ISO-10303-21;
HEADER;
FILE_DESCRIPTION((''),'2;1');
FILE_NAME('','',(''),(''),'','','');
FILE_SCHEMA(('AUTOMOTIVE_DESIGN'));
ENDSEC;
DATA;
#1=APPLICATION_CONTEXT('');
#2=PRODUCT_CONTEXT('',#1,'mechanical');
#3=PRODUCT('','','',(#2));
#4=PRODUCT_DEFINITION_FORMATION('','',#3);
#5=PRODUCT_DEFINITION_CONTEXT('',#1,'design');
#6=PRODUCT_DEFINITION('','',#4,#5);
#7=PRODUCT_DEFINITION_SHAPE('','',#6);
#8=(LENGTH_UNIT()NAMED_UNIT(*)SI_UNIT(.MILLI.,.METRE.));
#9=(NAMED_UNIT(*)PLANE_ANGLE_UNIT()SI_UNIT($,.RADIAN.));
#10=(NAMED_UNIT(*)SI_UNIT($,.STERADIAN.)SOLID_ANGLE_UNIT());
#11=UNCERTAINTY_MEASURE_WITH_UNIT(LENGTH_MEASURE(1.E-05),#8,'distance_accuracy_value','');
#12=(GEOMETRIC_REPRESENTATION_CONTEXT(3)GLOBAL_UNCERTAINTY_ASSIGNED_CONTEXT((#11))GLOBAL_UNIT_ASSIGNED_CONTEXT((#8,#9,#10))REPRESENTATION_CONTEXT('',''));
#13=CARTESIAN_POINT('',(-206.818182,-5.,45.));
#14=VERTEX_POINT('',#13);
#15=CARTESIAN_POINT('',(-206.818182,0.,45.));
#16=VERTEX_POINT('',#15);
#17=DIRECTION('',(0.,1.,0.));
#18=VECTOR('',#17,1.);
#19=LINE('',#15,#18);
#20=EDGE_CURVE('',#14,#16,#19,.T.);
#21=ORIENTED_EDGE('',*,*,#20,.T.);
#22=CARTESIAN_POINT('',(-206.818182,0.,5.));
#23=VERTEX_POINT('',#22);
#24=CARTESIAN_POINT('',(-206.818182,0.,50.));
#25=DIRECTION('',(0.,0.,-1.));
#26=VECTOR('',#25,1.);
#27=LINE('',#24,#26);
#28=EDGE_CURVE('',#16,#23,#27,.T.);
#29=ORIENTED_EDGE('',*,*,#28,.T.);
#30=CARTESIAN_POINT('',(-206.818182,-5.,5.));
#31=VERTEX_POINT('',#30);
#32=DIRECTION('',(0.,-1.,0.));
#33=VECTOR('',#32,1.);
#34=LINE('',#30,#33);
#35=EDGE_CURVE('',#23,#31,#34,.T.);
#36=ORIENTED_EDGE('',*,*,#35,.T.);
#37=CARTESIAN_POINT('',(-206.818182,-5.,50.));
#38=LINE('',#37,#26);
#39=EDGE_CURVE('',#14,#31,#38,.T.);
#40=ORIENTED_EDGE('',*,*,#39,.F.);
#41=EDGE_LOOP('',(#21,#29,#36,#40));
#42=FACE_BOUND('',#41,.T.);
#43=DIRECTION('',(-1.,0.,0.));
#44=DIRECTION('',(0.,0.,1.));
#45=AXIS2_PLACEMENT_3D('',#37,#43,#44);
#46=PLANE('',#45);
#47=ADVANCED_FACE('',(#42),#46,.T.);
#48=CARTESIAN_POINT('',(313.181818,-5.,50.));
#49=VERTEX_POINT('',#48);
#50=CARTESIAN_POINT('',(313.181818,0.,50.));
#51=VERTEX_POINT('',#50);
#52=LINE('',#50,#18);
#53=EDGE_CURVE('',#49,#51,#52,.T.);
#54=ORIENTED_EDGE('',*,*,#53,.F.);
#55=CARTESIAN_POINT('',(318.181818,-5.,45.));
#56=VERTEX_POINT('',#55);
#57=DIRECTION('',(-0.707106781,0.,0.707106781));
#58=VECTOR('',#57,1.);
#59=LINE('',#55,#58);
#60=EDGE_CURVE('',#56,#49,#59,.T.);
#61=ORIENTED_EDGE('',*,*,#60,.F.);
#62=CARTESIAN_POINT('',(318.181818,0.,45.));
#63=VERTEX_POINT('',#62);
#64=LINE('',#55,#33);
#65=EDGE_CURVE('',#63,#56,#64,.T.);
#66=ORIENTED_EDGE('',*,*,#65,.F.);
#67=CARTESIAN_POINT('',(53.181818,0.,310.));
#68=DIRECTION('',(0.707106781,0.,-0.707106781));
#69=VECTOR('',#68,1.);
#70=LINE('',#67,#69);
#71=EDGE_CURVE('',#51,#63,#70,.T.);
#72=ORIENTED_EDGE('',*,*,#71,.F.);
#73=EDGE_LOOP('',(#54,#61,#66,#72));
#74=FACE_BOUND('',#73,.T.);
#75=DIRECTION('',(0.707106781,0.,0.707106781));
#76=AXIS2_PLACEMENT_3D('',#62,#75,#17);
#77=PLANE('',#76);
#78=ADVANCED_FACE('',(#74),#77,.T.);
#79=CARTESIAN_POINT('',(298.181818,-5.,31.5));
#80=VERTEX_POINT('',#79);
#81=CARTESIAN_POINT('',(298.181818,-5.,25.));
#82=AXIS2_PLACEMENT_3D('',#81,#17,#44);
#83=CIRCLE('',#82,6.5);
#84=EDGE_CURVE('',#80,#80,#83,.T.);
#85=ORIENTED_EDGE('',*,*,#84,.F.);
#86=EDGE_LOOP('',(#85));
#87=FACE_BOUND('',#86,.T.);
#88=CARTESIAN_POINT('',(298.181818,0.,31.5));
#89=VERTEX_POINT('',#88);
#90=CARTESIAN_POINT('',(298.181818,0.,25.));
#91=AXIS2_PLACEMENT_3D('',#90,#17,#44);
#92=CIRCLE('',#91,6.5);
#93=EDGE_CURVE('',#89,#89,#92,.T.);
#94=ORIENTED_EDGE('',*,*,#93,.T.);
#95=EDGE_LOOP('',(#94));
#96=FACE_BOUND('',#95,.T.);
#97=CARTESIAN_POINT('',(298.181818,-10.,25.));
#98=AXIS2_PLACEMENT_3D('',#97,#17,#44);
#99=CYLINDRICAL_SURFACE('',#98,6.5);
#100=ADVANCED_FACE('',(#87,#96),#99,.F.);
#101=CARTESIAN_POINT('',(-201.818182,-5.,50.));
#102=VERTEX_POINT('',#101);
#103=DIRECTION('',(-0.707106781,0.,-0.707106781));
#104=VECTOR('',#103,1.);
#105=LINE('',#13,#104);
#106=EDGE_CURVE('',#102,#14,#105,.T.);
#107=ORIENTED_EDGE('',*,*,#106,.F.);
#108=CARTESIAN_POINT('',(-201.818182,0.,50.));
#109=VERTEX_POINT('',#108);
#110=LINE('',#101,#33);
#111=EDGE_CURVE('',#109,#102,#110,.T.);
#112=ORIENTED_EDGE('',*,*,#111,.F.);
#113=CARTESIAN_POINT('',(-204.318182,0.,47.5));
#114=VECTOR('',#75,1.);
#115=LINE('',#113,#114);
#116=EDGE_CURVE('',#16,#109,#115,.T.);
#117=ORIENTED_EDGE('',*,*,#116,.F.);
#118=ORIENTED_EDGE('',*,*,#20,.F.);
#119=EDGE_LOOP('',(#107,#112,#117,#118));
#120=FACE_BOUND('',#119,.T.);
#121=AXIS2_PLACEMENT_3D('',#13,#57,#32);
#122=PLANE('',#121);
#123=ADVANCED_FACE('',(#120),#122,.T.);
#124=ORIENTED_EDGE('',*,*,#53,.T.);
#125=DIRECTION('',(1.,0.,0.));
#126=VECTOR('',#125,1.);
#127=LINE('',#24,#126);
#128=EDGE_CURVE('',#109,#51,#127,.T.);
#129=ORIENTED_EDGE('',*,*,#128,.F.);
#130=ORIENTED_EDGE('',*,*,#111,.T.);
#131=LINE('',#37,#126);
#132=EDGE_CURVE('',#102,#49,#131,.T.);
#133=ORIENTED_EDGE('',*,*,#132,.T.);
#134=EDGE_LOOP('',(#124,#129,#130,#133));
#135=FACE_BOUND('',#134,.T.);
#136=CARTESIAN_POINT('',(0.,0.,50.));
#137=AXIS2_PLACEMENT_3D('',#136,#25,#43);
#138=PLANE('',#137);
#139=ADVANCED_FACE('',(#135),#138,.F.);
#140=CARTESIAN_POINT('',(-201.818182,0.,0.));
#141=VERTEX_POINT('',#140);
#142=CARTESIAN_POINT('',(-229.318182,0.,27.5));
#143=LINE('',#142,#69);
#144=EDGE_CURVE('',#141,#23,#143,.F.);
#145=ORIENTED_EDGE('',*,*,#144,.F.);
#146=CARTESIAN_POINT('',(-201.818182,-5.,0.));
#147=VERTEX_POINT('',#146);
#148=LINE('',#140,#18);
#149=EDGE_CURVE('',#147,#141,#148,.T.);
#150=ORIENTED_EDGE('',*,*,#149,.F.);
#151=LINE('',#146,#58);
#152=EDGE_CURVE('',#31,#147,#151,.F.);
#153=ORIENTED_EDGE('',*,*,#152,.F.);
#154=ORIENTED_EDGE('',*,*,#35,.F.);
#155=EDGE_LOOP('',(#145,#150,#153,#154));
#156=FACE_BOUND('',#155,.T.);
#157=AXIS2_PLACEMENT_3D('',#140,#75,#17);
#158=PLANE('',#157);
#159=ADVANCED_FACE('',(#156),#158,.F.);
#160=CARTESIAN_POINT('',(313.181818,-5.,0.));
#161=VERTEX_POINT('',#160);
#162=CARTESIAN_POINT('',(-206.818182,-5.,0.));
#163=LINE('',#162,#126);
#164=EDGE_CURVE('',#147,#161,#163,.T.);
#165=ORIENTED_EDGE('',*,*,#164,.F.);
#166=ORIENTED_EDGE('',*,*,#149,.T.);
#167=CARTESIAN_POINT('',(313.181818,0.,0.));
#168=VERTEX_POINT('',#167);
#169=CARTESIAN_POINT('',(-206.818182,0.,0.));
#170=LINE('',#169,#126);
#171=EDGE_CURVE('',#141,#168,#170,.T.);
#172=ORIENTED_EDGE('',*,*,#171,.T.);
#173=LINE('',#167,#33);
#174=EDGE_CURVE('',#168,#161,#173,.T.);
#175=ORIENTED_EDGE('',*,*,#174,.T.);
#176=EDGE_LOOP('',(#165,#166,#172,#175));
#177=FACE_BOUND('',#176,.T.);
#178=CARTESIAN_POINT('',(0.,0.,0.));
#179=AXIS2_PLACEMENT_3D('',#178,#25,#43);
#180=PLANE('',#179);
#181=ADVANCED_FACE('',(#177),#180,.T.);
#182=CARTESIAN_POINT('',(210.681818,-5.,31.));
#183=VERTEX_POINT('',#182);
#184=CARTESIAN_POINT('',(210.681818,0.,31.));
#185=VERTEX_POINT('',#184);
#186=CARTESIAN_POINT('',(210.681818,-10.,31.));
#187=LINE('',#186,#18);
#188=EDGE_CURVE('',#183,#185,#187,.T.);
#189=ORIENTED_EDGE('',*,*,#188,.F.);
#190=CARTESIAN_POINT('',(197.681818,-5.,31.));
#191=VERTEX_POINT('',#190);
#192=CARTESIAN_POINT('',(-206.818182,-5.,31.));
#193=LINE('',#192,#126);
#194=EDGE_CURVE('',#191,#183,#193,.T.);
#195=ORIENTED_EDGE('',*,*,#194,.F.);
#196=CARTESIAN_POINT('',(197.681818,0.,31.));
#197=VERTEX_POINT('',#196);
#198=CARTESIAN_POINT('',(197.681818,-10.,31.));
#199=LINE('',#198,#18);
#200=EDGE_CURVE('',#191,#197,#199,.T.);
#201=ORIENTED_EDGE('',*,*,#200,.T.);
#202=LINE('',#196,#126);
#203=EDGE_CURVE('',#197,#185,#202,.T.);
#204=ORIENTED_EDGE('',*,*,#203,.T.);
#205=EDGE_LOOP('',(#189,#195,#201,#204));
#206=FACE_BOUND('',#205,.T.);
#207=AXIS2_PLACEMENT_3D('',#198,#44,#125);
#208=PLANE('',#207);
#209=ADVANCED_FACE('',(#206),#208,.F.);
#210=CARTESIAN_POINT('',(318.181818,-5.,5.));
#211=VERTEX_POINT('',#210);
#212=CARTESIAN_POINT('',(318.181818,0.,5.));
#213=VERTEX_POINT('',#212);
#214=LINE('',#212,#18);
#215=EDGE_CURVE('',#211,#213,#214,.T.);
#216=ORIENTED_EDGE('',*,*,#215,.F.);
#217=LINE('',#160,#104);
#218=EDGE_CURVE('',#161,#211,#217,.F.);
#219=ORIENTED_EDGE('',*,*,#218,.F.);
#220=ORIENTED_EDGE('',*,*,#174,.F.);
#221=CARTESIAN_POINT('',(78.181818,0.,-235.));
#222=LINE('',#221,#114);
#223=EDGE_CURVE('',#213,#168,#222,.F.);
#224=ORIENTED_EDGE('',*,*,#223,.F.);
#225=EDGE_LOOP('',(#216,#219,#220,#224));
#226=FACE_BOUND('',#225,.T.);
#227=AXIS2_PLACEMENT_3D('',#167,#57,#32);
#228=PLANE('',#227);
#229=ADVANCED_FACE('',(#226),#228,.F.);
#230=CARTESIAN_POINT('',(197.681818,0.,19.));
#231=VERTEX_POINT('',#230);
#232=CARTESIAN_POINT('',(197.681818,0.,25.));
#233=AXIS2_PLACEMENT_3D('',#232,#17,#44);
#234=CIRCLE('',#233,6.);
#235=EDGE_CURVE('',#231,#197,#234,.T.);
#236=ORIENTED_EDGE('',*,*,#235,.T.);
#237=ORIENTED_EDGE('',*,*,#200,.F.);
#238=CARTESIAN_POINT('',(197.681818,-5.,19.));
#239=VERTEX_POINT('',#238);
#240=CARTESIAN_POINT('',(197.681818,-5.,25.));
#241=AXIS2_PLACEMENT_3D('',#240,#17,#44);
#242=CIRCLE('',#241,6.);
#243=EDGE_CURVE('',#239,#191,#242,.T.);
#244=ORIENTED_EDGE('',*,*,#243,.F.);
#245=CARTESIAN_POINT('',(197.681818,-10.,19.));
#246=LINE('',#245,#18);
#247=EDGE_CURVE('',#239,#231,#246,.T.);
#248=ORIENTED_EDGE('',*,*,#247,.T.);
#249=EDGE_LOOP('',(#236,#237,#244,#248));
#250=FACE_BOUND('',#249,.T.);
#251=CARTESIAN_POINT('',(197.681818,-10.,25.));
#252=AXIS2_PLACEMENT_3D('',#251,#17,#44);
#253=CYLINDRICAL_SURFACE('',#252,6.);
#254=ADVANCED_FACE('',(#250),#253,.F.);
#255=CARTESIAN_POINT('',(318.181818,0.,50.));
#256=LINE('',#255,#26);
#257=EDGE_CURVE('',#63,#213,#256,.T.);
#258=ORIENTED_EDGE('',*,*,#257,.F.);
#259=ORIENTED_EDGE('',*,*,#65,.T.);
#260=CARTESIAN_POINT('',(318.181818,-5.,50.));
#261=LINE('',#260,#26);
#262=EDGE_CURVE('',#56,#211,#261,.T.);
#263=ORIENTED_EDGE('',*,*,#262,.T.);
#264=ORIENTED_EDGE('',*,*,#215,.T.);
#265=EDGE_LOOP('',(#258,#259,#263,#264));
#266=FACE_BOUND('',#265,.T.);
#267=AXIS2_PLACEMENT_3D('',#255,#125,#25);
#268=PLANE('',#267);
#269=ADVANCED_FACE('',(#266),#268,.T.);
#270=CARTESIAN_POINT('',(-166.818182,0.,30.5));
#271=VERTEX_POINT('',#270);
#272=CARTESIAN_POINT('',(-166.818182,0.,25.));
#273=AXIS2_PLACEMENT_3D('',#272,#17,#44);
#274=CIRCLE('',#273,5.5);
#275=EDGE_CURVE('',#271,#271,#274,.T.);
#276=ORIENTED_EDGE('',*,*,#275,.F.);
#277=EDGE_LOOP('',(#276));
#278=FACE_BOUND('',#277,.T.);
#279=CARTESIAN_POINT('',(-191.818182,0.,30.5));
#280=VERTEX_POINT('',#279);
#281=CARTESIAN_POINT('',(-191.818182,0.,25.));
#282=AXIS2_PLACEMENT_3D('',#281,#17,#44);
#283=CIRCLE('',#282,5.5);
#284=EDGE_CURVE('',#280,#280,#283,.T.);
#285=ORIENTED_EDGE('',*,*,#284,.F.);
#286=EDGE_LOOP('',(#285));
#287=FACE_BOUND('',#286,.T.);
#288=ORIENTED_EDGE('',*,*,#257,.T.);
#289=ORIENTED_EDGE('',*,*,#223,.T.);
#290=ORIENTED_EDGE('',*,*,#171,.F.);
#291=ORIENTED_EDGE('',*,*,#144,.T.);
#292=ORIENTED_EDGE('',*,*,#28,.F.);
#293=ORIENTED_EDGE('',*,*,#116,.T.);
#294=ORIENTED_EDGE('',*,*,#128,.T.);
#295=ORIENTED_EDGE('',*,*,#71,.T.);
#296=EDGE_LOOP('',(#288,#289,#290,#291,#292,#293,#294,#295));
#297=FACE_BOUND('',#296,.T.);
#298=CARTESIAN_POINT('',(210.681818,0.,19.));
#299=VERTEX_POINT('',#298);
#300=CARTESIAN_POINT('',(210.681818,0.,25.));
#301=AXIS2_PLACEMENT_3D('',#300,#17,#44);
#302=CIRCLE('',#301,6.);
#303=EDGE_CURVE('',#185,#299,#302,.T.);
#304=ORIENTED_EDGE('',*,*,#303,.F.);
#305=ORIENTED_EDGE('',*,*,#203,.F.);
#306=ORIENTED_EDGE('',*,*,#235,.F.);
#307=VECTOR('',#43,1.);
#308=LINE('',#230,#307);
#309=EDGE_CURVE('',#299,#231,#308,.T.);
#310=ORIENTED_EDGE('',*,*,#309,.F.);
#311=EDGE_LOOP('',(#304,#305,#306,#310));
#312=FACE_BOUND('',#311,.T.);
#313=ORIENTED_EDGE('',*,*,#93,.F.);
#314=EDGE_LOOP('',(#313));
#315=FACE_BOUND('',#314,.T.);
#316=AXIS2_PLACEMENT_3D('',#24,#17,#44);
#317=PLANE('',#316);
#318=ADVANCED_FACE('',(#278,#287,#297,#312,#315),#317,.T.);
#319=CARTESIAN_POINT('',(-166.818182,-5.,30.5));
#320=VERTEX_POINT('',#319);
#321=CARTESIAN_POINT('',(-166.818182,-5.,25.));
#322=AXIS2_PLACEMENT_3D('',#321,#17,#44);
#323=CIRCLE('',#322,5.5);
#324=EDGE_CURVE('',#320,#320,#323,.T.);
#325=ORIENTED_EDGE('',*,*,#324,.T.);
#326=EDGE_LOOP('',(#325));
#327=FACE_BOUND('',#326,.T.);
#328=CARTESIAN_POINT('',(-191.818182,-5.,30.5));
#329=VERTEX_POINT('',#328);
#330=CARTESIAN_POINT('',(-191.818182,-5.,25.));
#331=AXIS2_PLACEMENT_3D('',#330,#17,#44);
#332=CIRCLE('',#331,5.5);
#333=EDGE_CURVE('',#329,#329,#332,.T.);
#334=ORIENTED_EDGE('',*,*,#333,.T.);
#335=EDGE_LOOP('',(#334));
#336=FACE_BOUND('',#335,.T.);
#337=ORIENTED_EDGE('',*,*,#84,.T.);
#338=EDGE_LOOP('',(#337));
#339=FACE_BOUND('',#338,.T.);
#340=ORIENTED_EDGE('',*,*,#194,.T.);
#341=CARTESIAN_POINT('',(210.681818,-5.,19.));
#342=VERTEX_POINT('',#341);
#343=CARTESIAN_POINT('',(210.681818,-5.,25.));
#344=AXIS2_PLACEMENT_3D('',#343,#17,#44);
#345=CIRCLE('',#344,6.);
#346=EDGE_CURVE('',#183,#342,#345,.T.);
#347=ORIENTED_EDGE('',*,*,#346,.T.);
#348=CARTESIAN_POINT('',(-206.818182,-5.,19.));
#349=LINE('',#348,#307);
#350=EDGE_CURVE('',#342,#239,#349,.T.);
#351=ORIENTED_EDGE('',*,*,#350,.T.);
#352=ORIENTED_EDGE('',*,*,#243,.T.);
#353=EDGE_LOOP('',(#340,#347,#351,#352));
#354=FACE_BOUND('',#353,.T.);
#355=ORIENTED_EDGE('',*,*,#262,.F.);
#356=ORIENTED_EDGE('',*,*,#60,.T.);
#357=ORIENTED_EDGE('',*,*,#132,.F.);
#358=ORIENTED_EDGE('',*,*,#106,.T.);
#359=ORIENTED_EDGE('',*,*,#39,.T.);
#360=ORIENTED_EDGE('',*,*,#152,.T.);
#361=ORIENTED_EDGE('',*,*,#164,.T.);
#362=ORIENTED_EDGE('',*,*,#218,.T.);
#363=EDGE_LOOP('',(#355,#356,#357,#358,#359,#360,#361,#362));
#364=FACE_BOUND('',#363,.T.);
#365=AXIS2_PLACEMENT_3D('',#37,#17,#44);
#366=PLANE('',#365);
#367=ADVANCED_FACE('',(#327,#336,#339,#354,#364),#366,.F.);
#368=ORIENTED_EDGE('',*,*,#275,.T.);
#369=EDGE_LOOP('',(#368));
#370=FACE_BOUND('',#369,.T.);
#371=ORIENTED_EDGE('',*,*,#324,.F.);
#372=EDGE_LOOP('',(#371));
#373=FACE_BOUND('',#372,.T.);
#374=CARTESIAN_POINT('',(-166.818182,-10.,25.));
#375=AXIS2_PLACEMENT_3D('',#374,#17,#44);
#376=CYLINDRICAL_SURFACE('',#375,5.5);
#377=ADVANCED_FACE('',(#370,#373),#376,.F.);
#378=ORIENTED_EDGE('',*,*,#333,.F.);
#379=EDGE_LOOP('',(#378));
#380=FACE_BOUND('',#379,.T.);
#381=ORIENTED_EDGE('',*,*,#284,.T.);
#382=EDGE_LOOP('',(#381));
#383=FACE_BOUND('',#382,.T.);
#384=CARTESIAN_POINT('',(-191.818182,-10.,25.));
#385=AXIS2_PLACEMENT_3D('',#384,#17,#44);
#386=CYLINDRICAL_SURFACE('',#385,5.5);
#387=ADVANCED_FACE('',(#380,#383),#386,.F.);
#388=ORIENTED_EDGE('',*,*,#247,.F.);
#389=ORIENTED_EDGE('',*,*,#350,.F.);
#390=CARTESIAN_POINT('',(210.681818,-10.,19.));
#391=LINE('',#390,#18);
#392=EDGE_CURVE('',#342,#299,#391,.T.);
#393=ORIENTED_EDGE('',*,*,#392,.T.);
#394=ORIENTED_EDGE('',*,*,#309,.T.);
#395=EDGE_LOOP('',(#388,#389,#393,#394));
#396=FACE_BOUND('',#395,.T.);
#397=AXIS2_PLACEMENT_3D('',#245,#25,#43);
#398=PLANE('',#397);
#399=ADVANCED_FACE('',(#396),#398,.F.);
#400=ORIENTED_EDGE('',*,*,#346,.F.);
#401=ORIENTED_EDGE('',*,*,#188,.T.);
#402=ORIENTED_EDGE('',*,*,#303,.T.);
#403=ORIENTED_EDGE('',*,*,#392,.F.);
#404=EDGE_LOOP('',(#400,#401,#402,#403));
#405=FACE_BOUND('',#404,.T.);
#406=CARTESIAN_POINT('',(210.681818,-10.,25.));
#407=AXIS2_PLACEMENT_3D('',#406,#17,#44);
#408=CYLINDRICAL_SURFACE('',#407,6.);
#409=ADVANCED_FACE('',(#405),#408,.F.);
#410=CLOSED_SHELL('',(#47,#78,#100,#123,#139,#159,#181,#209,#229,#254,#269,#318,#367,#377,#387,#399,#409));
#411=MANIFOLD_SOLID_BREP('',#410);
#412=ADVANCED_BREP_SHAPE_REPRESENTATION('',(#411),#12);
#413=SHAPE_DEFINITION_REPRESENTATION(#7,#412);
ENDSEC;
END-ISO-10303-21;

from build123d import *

# Parameters (mm, degrees)
SKETCH_1_W             = 525
SKETCH_1_H             = 5
SM_BASE_FLANGE_1_DEPTH = 50
SKETCH_6_R             = 5.5
CUT_EXTRUDE_1_DEPTH    = 10
CUT_EXTRUDE_2_DEPTH    = 10
SKETCH_8_R             = 6.5
CUT_EXTRUDE_3_DEPTH    = 10
OTHER_START            = -5
OTHER_1_DEPTH          = 5


# Read off the part's stored shape, not the designer's step: Затупленный угол1
# Sheet-metal steps are written as plain solids
with BuildPart() as part:
    # Sketch 1 → Базовая кромка1 (new body)
    with BuildSketch(Plane.XY):
        with Locations((55.681818182, -2.5)):
            Rectangle(SKETCH_1_W, SKETCH_1_H)
    extrude(amount=SM_BASE_FLANGE_1_DEPTH)

    # Эскиз6 → Вырез-Вытянуть1 (cut)
    with BuildSketch(Plane(origin=(0, 0, 0), x_dir=(1, 0, 0), z_dir=(0, 1, 0))):
        with Locations(Location((-191.818181818, -25, 0), (0, 0, 270))):
            Circle(SKETCH_6_R)
        with Locations(Location((-166.818181818, -25, 0), (0, 0, 270))):
            Circle(SKETCH_6_R)
    extrude(amount=-CUT_EXTRUDE_1_DEPTH, mode=Mode.SUBTRACT)

    # Эскиз7 → Вырез-Вытянуть2 (cut)
    with BuildSketch(Plane(origin=(0, 0, 0), x_dir=(1, 0, 0), z_dir=(0, 1, 0))):
        with BuildLine():
            Line((197.681818182, -19), (210.681818182, -19))
            ThreePointArc((210.681818182, -19), (216.681818182, -25), (210.681818182, -31))
            Line((210.681818182, -31), (197.681818182, -31))
            ThreePointArc((197.681818182, -31), (191.681818182, -25), (197.681818182, -19))
        make_face()
    extrude(amount=-CUT_EXTRUDE_2_DEPTH, mode=Mode.SUBTRACT)

    # Эскиз8 → Вырез-Вытянуть3 (cut)
    with BuildSketch(Plane(origin=(0, 0, 0), x_dir=(1, 0, 0), z_dir=(0, 1, 0))):
        with Locations(Location((298.181818182, -25, 0), (0, 0, 270))):
            Circle(SKETCH_8_R)
    extrude(amount=-CUT_EXTRUDE_3_DEPTH, mode=Mode.SUBTRACT)

    # Other 1 outline → Other 1 (cut)
    with BuildSketch(Plane(origin=(0, 0, 0), x_dir=(1, 0, 0), z_dir=(0, 1, 0)).offset(OTHER_START)):
        Polygon((318.181818182, 0), (313.181818182, 0), (318.181818182, -5), align=None)
        Polygon((-206.818181818, -5), (-201.818181818, 0), (-206.818181818, 0), align=None)
        Polygon((318.181818182, -50), (318.181818182, -45), (313.181818182, -50), align=None)
        Polygon((-201.818181818, -50), (-206.818181818, -45), (-206.818181818, -50), align=None)
    extrude(amount=OTHER_1_DEPTH, mode=Mode.SUBTRACT)


solid = part.part
